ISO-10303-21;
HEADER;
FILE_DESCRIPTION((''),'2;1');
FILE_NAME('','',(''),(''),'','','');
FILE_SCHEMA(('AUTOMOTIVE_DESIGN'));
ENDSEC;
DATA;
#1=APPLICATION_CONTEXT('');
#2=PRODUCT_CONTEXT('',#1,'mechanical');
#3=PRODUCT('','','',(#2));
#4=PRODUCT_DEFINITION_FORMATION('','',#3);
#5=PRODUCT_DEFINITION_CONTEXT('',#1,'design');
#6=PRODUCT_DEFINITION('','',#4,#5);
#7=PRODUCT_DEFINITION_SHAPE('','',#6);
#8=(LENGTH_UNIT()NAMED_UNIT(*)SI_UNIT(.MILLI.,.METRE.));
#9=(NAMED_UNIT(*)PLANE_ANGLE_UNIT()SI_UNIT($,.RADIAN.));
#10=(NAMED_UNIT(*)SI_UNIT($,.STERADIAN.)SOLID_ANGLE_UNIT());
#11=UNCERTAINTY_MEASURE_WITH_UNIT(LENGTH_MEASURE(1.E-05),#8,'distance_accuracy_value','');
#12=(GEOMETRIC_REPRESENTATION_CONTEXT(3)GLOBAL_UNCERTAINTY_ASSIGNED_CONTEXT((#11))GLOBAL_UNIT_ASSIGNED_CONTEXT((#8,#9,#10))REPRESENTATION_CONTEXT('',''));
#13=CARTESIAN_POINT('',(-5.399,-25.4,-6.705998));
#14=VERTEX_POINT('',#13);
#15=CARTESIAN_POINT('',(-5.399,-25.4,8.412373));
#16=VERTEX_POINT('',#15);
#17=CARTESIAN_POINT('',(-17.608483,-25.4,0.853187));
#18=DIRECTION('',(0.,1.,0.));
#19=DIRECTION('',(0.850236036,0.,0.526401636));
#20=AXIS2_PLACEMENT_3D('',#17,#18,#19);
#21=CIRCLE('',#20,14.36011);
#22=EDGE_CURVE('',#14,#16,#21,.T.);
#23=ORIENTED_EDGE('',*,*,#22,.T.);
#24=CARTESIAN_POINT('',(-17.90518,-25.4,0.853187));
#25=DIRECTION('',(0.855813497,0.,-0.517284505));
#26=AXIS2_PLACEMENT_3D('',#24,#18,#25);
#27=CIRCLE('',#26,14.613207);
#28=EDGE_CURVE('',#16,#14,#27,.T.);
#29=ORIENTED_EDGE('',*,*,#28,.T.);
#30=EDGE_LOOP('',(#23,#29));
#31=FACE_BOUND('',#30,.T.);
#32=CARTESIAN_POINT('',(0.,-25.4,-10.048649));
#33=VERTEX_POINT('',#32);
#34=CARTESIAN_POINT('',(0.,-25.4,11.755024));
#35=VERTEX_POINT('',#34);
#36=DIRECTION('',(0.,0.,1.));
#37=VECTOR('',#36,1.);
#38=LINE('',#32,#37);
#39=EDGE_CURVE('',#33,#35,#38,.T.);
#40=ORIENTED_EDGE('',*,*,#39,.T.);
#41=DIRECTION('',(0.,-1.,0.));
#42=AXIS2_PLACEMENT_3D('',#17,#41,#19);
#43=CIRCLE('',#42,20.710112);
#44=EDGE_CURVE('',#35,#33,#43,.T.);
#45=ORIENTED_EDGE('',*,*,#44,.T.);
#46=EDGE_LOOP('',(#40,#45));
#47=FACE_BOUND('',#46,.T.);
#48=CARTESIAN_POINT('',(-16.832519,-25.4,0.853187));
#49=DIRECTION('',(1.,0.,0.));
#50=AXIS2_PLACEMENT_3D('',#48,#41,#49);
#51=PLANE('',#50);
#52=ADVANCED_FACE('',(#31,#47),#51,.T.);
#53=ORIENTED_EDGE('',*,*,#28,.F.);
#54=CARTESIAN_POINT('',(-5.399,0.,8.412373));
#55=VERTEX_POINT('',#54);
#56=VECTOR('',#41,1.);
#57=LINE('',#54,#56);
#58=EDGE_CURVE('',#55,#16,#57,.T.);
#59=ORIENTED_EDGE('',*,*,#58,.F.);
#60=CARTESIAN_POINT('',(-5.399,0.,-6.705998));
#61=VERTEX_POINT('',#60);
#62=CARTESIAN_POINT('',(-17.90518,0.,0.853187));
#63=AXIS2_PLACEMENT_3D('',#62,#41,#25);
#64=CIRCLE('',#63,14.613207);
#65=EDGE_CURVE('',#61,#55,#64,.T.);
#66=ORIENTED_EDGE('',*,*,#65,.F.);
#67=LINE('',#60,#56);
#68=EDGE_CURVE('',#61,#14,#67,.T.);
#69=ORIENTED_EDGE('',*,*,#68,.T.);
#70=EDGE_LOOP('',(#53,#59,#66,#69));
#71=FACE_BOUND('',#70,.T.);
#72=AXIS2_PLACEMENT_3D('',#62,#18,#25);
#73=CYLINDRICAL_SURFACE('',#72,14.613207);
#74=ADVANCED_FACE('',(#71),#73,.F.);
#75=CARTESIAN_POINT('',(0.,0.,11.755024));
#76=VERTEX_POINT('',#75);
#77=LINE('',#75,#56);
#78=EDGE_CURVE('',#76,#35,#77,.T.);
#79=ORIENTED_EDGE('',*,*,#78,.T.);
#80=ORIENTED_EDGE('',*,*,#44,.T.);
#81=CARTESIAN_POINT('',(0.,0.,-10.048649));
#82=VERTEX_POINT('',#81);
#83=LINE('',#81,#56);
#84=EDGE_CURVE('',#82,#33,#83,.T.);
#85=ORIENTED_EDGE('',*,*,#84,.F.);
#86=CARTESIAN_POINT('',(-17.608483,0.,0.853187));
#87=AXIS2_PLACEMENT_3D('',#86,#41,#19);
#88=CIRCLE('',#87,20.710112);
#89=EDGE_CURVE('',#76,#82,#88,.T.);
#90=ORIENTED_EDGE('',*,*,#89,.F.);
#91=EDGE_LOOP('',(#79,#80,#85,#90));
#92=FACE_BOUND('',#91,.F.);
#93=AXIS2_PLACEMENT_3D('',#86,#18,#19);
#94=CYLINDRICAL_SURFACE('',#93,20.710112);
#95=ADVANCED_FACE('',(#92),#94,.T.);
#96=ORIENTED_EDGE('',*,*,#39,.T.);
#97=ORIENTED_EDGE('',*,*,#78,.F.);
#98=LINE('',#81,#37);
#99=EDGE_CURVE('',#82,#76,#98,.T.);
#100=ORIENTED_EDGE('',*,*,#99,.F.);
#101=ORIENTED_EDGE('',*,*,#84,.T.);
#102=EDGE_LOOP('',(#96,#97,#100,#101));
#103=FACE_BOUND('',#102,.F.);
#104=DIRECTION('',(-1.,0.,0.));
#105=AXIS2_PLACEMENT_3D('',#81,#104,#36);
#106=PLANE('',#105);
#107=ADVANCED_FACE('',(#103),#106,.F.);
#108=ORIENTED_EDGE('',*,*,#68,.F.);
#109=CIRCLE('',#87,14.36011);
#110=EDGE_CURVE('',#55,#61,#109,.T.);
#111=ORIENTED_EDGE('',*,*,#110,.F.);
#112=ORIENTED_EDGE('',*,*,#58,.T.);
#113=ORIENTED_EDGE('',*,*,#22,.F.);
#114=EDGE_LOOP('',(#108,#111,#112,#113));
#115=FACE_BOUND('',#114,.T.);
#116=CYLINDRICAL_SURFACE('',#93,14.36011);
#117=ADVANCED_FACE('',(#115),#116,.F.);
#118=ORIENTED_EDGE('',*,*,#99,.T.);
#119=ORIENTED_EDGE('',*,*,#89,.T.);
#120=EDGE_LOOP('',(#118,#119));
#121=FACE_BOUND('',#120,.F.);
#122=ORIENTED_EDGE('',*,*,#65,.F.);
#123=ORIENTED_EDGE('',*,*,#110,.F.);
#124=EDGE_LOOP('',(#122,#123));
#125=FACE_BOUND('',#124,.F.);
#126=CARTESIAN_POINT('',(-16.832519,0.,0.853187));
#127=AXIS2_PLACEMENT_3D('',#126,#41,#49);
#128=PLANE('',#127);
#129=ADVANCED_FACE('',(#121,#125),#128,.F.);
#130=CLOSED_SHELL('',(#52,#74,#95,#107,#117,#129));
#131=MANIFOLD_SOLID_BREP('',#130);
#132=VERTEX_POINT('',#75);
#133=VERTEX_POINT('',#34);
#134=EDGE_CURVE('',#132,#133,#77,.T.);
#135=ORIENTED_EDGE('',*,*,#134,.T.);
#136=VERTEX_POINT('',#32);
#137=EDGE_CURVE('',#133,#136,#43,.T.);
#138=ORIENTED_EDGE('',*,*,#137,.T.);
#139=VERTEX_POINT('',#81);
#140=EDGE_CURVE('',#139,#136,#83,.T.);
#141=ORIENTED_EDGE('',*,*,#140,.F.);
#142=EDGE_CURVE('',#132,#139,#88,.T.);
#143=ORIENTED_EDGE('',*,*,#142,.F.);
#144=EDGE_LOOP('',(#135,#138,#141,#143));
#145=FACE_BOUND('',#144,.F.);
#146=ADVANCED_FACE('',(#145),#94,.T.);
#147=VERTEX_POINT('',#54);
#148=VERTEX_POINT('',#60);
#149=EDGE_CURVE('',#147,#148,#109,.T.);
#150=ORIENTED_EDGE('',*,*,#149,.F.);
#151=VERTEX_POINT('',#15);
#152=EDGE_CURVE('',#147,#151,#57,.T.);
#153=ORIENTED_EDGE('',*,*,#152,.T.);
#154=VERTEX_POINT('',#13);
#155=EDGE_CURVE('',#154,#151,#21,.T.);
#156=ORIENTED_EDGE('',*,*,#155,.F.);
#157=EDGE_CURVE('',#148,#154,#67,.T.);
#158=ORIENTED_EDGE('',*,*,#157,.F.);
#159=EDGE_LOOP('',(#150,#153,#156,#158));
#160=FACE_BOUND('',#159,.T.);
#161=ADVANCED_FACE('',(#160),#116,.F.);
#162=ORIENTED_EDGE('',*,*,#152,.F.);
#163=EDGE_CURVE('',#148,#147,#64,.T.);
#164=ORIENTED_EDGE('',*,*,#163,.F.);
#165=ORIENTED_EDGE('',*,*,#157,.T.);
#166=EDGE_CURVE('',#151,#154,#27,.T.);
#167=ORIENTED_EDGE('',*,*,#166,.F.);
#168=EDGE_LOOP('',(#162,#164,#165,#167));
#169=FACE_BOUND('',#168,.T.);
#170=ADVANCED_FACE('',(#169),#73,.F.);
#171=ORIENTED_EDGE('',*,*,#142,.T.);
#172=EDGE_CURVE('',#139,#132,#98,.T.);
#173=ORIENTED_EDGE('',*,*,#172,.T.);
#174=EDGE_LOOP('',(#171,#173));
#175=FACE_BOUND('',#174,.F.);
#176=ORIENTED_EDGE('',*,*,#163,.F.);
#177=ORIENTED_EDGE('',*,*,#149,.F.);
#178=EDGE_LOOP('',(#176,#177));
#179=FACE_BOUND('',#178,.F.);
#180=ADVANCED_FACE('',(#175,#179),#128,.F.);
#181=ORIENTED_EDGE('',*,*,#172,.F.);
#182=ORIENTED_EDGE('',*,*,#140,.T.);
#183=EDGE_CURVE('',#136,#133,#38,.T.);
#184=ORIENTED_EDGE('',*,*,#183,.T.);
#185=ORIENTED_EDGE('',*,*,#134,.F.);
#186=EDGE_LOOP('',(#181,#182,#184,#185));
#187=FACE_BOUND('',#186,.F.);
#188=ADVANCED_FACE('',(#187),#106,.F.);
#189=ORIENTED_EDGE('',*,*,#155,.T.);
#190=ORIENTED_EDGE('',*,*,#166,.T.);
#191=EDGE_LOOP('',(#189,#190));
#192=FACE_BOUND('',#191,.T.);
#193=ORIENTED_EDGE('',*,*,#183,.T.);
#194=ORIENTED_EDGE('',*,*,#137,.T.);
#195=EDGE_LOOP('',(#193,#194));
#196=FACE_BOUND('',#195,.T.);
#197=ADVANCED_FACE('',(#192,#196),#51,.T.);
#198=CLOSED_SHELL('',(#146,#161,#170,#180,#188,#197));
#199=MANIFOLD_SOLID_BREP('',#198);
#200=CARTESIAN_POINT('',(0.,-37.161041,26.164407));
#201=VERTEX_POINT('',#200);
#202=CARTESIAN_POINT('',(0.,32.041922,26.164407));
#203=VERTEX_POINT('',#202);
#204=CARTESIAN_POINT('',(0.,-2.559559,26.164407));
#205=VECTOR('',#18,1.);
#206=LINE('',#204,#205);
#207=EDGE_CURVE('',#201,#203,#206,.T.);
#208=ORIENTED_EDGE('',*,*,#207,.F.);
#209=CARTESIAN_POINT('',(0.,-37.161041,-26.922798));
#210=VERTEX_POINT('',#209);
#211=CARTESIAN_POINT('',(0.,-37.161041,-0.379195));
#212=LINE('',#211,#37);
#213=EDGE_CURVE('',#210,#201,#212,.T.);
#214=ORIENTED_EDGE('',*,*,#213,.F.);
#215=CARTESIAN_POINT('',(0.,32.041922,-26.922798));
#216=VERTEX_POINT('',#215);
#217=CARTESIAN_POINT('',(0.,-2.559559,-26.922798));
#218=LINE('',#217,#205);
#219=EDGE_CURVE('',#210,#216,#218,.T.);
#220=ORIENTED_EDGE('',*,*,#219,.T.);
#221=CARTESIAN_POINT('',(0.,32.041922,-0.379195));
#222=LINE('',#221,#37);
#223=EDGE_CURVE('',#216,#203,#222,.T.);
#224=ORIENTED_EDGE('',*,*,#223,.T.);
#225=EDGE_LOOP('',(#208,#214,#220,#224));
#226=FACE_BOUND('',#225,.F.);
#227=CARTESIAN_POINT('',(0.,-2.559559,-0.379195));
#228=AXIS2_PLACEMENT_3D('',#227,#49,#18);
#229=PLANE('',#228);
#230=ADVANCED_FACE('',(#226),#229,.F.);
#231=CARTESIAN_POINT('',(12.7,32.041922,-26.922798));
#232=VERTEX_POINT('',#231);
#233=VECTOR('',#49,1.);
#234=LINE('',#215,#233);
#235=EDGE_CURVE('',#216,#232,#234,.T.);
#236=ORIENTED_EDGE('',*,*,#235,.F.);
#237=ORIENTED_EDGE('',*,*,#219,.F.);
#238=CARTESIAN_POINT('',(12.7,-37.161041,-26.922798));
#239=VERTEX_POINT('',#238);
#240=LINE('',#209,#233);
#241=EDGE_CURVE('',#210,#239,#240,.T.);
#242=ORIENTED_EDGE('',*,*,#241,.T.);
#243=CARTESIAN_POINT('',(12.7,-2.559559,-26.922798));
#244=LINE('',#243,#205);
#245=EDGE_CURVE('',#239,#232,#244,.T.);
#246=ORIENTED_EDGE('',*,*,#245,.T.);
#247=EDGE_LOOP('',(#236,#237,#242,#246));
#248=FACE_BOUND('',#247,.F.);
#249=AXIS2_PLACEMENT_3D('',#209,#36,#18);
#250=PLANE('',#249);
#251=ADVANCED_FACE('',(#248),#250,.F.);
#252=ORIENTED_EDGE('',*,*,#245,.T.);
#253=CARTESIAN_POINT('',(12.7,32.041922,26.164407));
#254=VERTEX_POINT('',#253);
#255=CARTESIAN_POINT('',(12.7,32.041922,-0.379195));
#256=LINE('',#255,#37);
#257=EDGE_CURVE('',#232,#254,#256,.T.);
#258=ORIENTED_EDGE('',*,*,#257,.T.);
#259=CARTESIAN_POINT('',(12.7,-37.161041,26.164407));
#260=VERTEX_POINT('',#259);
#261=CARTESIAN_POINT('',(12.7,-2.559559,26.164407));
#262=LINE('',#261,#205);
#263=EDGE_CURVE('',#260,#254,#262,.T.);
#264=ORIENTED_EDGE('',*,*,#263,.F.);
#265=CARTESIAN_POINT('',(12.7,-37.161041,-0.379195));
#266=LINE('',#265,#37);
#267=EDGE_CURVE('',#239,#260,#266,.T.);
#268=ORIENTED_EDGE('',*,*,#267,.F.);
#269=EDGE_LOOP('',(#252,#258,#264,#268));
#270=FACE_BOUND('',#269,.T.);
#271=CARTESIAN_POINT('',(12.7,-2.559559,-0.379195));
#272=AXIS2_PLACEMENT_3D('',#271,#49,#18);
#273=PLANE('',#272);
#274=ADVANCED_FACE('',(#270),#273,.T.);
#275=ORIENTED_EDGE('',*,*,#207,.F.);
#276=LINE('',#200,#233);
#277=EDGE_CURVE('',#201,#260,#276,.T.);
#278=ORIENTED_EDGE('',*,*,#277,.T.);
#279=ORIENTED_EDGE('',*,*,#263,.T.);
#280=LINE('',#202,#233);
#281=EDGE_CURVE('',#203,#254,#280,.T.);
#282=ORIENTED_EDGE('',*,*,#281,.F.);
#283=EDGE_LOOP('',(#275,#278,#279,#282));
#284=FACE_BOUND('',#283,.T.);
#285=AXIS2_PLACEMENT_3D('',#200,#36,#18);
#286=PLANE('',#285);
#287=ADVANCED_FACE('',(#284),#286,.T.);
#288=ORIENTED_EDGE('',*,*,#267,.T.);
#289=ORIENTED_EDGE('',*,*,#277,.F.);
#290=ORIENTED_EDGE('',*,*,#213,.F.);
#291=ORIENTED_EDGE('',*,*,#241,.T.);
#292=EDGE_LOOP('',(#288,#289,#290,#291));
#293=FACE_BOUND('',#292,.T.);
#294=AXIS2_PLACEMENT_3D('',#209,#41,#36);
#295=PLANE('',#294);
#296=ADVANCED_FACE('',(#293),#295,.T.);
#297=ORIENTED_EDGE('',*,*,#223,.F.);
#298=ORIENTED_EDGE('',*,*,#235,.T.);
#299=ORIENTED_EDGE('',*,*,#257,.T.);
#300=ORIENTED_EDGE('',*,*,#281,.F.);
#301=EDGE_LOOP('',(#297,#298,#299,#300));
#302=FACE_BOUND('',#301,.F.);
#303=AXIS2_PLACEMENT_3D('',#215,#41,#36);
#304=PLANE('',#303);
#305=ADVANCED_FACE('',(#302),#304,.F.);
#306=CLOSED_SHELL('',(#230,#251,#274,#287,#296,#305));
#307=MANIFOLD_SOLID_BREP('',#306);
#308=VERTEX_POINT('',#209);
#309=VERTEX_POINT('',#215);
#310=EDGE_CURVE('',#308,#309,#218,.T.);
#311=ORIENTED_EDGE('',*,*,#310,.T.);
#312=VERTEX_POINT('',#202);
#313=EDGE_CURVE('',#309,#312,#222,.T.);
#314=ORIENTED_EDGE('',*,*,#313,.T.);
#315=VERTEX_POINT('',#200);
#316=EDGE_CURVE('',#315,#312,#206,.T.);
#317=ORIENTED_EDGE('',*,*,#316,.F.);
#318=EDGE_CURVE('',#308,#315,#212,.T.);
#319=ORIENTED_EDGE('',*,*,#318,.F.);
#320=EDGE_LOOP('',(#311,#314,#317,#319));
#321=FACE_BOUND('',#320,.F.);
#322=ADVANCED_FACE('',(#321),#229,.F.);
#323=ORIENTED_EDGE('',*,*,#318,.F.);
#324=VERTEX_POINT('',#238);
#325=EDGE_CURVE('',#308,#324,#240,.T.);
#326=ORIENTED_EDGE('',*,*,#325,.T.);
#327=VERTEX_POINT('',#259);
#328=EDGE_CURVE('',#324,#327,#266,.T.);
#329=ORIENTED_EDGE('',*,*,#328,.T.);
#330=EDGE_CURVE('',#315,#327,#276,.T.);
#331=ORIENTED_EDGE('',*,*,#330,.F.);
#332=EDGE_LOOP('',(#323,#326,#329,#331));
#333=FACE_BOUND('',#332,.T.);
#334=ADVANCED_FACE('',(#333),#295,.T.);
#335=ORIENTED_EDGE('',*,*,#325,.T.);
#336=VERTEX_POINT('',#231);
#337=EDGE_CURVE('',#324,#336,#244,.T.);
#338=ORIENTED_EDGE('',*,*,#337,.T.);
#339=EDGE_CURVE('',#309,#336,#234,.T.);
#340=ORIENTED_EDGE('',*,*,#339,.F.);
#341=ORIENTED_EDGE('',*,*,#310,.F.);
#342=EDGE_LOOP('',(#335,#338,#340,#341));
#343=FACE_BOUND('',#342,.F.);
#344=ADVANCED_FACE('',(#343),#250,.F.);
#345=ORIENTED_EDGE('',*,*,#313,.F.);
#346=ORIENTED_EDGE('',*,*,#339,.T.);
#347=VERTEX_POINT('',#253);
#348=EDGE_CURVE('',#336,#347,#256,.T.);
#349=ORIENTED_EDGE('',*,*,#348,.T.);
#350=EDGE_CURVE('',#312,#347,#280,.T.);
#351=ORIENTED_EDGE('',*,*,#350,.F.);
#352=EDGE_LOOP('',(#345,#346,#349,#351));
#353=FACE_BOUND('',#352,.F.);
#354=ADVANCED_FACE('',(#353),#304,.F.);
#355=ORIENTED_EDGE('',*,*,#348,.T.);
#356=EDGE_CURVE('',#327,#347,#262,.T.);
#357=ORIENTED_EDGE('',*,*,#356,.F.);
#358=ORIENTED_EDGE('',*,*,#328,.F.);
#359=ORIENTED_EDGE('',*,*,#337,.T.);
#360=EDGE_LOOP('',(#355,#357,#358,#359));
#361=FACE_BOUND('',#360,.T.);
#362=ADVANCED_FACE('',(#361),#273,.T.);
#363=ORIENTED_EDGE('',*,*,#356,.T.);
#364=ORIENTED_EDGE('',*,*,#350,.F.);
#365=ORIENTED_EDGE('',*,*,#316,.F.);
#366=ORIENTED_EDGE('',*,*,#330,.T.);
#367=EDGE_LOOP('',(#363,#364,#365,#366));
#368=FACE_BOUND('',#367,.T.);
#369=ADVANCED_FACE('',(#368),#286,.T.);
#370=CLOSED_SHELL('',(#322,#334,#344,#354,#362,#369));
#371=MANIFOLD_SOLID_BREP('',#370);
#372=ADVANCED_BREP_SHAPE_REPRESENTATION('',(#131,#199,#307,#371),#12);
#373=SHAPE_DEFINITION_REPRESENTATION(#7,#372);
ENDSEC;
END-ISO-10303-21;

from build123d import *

# Parameters (mm, degrees)
F0_W     = 69.2029632628
F0_H     = 53.0872046947
F1_DEPTH = 12.7
F3_DEPTH = 25.4
F7_DEPTH = 25.4
F8_DEPTH = 37.1620410511
F9_DEPTH = 12.7


# Not quite as in the source:
# - the program builds the solid bodies; features that only make, move or delete a surface that nothing else refers to are left out


with BuildPart() as f1:
    # F0 (on Right) → F1 (new body)
    with BuildSketch(Plane.YZ):
        with Locations((-2.5595594198, -0.3791954368)):
            Rectangle(F0_W, F0_H)
    extrude(amount=F1_DEPTH)


with BuildPart() as f3:
    # F2 (on Front) → F3 (new body)
    with BuildSketch(Plane.XZ):
        with BuildLine():
            Line((0, -10.0486492738), (0, 11.755024083))
            ThreePointArc((0, 11.755024083), (-38.3185949727, 0.8531874046), (0, -10.0486492738))
        make_face()
    extrude(amount=F3_DEPTH)


with BuildPart() as f7:
    # F2 (on Front) → F7 (new body)
    with BuildSketch(Plane.XZ):
        with BuildLine():
            Line((0, -10.0486492738), (0, 11.755024083))
            ThreePointArc((0, 11.755024083), (-38.3185949727, 0.8531874046), (0, -10.0486492738))
        make_face()
    extrude(amount=F7_DEPTH)


with BuildPart() as f8_tool:
    # F4 (on Front) → F8 (new body, through all)
    with BuildSketch(Plane.XZ):
        with BuildLine():
            ThreePointArc((-5.3990000004, -6.7059981609), (-3.2919727747, 0.8531874046), (-5.3990000004, 8.41237297))
            ThreePointArc((-5.3990000004, 8.41237297), (-31.9685935974, 0.8531874046), (-5.3990000004, -6.7059981609))
        make_face()
    extrude(amount=F8_DEPTH)


with BuildPart() as f3_1:
    add(f3.part)

    # F8: cut by f8_tool
    add(f8_tool.part, mode=Mode.SUBTRACT)


with BuildPart() as f7_1:
    add(f7.part)

    # F8: cut by f8_tool
    add(f8_tool.part, mode=Mode.SUBTRACT)


with BuildPart() as f9:
    # F0 (on Right) → F9 (new body)
    with BuildSketch(Plane.YZ):
        with Locations((-2.5595594198, -0.3791954368)):
            Rectangle(F0_W, F0_H)
    extrude(amount=F9_DEPTH)


solid = Compound([f1.part, f3_1.part, f7_1.part, f9.part])
